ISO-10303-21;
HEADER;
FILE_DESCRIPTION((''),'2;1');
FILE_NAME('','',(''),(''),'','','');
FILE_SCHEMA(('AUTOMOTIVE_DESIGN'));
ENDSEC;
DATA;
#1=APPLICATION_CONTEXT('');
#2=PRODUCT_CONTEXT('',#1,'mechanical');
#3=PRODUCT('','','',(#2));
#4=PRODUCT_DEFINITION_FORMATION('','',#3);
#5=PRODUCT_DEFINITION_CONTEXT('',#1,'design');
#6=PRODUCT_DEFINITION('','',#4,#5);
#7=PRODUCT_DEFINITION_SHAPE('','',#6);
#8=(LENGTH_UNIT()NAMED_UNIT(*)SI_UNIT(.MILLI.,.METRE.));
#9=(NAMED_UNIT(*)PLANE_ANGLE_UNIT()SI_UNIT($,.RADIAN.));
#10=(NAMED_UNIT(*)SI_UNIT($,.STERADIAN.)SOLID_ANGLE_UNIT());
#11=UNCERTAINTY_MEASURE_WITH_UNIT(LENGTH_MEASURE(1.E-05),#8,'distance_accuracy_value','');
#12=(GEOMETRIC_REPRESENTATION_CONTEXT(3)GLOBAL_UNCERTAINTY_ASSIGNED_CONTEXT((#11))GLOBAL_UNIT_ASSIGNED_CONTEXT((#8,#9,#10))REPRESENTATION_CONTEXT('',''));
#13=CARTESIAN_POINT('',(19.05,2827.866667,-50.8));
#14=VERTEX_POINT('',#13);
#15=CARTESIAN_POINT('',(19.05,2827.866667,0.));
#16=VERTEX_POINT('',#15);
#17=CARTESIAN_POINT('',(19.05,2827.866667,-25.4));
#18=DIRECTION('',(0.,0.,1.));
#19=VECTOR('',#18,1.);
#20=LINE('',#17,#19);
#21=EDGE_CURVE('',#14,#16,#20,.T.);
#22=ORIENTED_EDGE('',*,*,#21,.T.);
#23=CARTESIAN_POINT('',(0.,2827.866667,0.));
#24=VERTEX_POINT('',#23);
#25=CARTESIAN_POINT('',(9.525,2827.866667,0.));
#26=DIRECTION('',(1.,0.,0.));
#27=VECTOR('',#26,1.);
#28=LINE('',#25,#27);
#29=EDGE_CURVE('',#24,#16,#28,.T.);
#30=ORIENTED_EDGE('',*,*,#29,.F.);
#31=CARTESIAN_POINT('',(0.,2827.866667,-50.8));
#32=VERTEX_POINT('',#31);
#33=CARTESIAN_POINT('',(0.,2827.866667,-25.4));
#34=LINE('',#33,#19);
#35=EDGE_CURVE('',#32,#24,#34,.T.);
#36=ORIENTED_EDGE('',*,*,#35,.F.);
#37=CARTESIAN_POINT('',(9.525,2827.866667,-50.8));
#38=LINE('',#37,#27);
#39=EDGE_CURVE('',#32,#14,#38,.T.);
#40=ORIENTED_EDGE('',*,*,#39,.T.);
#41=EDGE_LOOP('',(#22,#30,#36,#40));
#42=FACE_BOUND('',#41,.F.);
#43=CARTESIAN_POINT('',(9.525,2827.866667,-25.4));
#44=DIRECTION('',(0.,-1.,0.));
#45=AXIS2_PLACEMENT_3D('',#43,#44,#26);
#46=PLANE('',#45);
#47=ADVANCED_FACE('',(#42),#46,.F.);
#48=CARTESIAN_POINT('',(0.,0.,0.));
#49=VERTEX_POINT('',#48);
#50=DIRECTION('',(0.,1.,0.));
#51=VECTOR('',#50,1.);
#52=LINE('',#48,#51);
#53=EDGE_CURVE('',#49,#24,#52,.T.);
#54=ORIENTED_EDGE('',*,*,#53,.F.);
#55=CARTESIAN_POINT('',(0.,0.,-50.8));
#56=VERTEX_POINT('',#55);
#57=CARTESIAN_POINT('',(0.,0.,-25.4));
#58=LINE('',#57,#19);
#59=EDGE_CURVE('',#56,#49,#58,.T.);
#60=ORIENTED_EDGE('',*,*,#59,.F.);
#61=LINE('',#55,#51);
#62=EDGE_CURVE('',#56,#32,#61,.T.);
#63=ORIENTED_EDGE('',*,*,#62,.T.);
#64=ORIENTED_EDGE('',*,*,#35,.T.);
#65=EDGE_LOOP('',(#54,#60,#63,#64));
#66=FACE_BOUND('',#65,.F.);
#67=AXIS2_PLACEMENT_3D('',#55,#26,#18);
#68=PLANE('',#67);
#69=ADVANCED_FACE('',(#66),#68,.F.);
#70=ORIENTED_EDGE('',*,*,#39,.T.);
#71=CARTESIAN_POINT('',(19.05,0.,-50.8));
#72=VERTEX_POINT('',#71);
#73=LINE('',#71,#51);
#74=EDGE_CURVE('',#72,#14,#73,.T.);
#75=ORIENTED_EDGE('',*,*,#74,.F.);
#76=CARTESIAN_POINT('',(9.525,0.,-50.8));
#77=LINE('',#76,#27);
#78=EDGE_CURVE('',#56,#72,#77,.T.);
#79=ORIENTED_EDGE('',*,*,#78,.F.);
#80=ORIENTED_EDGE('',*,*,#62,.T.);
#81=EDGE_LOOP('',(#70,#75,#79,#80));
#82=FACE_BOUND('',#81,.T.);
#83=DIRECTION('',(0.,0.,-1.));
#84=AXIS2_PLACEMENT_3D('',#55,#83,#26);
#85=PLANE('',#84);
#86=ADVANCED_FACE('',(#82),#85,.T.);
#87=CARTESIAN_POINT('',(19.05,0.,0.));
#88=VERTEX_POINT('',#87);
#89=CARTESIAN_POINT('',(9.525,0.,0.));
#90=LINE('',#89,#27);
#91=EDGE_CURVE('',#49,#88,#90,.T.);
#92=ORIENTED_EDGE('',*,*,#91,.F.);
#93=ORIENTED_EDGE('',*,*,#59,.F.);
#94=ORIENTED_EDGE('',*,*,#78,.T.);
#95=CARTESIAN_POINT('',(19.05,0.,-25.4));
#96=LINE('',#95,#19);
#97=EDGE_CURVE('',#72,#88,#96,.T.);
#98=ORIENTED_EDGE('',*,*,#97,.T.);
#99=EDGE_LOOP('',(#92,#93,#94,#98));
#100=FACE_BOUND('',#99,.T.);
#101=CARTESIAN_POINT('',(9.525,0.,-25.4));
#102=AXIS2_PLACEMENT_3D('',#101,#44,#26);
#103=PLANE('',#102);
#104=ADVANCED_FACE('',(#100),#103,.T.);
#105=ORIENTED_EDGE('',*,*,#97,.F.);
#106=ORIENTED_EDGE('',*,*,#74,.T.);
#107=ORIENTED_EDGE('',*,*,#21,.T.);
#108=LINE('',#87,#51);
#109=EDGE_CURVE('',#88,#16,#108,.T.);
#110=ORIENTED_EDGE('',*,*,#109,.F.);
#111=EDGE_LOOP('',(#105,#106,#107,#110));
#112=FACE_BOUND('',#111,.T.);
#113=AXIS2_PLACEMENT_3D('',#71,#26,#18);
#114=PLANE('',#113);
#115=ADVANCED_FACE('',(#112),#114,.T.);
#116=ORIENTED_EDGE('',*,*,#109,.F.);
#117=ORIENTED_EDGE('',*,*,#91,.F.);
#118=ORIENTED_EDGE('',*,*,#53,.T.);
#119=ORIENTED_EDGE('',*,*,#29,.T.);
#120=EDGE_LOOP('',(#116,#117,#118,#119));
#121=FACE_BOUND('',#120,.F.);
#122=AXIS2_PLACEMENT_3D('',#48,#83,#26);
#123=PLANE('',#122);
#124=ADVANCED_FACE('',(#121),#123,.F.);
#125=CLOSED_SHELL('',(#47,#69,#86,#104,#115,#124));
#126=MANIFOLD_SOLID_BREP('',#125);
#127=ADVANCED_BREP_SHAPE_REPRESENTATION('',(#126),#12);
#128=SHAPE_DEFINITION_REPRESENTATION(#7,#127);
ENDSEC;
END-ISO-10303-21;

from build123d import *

# Parameters (mm, degrees)
F0_W     = 19.05
F0_H     = 50.8
F1_DEPTH = 2827.8666666667


# Not quite as in the source:
# - a length typed as a fraction of an inch, garbled in the dataset ("3 / 203.2 mm" for 3/8 in), is restored


with BuildPart() as f1:
    # F0 (on Front) → F1 (new body)
    with BuildSketch(Plane.XZ):
        with Locations((9.525, -25.4)):
            Rectangle(F0_W, F0_H)
    extrude(amount=-F1_DEPTH)


solid = f1.part
